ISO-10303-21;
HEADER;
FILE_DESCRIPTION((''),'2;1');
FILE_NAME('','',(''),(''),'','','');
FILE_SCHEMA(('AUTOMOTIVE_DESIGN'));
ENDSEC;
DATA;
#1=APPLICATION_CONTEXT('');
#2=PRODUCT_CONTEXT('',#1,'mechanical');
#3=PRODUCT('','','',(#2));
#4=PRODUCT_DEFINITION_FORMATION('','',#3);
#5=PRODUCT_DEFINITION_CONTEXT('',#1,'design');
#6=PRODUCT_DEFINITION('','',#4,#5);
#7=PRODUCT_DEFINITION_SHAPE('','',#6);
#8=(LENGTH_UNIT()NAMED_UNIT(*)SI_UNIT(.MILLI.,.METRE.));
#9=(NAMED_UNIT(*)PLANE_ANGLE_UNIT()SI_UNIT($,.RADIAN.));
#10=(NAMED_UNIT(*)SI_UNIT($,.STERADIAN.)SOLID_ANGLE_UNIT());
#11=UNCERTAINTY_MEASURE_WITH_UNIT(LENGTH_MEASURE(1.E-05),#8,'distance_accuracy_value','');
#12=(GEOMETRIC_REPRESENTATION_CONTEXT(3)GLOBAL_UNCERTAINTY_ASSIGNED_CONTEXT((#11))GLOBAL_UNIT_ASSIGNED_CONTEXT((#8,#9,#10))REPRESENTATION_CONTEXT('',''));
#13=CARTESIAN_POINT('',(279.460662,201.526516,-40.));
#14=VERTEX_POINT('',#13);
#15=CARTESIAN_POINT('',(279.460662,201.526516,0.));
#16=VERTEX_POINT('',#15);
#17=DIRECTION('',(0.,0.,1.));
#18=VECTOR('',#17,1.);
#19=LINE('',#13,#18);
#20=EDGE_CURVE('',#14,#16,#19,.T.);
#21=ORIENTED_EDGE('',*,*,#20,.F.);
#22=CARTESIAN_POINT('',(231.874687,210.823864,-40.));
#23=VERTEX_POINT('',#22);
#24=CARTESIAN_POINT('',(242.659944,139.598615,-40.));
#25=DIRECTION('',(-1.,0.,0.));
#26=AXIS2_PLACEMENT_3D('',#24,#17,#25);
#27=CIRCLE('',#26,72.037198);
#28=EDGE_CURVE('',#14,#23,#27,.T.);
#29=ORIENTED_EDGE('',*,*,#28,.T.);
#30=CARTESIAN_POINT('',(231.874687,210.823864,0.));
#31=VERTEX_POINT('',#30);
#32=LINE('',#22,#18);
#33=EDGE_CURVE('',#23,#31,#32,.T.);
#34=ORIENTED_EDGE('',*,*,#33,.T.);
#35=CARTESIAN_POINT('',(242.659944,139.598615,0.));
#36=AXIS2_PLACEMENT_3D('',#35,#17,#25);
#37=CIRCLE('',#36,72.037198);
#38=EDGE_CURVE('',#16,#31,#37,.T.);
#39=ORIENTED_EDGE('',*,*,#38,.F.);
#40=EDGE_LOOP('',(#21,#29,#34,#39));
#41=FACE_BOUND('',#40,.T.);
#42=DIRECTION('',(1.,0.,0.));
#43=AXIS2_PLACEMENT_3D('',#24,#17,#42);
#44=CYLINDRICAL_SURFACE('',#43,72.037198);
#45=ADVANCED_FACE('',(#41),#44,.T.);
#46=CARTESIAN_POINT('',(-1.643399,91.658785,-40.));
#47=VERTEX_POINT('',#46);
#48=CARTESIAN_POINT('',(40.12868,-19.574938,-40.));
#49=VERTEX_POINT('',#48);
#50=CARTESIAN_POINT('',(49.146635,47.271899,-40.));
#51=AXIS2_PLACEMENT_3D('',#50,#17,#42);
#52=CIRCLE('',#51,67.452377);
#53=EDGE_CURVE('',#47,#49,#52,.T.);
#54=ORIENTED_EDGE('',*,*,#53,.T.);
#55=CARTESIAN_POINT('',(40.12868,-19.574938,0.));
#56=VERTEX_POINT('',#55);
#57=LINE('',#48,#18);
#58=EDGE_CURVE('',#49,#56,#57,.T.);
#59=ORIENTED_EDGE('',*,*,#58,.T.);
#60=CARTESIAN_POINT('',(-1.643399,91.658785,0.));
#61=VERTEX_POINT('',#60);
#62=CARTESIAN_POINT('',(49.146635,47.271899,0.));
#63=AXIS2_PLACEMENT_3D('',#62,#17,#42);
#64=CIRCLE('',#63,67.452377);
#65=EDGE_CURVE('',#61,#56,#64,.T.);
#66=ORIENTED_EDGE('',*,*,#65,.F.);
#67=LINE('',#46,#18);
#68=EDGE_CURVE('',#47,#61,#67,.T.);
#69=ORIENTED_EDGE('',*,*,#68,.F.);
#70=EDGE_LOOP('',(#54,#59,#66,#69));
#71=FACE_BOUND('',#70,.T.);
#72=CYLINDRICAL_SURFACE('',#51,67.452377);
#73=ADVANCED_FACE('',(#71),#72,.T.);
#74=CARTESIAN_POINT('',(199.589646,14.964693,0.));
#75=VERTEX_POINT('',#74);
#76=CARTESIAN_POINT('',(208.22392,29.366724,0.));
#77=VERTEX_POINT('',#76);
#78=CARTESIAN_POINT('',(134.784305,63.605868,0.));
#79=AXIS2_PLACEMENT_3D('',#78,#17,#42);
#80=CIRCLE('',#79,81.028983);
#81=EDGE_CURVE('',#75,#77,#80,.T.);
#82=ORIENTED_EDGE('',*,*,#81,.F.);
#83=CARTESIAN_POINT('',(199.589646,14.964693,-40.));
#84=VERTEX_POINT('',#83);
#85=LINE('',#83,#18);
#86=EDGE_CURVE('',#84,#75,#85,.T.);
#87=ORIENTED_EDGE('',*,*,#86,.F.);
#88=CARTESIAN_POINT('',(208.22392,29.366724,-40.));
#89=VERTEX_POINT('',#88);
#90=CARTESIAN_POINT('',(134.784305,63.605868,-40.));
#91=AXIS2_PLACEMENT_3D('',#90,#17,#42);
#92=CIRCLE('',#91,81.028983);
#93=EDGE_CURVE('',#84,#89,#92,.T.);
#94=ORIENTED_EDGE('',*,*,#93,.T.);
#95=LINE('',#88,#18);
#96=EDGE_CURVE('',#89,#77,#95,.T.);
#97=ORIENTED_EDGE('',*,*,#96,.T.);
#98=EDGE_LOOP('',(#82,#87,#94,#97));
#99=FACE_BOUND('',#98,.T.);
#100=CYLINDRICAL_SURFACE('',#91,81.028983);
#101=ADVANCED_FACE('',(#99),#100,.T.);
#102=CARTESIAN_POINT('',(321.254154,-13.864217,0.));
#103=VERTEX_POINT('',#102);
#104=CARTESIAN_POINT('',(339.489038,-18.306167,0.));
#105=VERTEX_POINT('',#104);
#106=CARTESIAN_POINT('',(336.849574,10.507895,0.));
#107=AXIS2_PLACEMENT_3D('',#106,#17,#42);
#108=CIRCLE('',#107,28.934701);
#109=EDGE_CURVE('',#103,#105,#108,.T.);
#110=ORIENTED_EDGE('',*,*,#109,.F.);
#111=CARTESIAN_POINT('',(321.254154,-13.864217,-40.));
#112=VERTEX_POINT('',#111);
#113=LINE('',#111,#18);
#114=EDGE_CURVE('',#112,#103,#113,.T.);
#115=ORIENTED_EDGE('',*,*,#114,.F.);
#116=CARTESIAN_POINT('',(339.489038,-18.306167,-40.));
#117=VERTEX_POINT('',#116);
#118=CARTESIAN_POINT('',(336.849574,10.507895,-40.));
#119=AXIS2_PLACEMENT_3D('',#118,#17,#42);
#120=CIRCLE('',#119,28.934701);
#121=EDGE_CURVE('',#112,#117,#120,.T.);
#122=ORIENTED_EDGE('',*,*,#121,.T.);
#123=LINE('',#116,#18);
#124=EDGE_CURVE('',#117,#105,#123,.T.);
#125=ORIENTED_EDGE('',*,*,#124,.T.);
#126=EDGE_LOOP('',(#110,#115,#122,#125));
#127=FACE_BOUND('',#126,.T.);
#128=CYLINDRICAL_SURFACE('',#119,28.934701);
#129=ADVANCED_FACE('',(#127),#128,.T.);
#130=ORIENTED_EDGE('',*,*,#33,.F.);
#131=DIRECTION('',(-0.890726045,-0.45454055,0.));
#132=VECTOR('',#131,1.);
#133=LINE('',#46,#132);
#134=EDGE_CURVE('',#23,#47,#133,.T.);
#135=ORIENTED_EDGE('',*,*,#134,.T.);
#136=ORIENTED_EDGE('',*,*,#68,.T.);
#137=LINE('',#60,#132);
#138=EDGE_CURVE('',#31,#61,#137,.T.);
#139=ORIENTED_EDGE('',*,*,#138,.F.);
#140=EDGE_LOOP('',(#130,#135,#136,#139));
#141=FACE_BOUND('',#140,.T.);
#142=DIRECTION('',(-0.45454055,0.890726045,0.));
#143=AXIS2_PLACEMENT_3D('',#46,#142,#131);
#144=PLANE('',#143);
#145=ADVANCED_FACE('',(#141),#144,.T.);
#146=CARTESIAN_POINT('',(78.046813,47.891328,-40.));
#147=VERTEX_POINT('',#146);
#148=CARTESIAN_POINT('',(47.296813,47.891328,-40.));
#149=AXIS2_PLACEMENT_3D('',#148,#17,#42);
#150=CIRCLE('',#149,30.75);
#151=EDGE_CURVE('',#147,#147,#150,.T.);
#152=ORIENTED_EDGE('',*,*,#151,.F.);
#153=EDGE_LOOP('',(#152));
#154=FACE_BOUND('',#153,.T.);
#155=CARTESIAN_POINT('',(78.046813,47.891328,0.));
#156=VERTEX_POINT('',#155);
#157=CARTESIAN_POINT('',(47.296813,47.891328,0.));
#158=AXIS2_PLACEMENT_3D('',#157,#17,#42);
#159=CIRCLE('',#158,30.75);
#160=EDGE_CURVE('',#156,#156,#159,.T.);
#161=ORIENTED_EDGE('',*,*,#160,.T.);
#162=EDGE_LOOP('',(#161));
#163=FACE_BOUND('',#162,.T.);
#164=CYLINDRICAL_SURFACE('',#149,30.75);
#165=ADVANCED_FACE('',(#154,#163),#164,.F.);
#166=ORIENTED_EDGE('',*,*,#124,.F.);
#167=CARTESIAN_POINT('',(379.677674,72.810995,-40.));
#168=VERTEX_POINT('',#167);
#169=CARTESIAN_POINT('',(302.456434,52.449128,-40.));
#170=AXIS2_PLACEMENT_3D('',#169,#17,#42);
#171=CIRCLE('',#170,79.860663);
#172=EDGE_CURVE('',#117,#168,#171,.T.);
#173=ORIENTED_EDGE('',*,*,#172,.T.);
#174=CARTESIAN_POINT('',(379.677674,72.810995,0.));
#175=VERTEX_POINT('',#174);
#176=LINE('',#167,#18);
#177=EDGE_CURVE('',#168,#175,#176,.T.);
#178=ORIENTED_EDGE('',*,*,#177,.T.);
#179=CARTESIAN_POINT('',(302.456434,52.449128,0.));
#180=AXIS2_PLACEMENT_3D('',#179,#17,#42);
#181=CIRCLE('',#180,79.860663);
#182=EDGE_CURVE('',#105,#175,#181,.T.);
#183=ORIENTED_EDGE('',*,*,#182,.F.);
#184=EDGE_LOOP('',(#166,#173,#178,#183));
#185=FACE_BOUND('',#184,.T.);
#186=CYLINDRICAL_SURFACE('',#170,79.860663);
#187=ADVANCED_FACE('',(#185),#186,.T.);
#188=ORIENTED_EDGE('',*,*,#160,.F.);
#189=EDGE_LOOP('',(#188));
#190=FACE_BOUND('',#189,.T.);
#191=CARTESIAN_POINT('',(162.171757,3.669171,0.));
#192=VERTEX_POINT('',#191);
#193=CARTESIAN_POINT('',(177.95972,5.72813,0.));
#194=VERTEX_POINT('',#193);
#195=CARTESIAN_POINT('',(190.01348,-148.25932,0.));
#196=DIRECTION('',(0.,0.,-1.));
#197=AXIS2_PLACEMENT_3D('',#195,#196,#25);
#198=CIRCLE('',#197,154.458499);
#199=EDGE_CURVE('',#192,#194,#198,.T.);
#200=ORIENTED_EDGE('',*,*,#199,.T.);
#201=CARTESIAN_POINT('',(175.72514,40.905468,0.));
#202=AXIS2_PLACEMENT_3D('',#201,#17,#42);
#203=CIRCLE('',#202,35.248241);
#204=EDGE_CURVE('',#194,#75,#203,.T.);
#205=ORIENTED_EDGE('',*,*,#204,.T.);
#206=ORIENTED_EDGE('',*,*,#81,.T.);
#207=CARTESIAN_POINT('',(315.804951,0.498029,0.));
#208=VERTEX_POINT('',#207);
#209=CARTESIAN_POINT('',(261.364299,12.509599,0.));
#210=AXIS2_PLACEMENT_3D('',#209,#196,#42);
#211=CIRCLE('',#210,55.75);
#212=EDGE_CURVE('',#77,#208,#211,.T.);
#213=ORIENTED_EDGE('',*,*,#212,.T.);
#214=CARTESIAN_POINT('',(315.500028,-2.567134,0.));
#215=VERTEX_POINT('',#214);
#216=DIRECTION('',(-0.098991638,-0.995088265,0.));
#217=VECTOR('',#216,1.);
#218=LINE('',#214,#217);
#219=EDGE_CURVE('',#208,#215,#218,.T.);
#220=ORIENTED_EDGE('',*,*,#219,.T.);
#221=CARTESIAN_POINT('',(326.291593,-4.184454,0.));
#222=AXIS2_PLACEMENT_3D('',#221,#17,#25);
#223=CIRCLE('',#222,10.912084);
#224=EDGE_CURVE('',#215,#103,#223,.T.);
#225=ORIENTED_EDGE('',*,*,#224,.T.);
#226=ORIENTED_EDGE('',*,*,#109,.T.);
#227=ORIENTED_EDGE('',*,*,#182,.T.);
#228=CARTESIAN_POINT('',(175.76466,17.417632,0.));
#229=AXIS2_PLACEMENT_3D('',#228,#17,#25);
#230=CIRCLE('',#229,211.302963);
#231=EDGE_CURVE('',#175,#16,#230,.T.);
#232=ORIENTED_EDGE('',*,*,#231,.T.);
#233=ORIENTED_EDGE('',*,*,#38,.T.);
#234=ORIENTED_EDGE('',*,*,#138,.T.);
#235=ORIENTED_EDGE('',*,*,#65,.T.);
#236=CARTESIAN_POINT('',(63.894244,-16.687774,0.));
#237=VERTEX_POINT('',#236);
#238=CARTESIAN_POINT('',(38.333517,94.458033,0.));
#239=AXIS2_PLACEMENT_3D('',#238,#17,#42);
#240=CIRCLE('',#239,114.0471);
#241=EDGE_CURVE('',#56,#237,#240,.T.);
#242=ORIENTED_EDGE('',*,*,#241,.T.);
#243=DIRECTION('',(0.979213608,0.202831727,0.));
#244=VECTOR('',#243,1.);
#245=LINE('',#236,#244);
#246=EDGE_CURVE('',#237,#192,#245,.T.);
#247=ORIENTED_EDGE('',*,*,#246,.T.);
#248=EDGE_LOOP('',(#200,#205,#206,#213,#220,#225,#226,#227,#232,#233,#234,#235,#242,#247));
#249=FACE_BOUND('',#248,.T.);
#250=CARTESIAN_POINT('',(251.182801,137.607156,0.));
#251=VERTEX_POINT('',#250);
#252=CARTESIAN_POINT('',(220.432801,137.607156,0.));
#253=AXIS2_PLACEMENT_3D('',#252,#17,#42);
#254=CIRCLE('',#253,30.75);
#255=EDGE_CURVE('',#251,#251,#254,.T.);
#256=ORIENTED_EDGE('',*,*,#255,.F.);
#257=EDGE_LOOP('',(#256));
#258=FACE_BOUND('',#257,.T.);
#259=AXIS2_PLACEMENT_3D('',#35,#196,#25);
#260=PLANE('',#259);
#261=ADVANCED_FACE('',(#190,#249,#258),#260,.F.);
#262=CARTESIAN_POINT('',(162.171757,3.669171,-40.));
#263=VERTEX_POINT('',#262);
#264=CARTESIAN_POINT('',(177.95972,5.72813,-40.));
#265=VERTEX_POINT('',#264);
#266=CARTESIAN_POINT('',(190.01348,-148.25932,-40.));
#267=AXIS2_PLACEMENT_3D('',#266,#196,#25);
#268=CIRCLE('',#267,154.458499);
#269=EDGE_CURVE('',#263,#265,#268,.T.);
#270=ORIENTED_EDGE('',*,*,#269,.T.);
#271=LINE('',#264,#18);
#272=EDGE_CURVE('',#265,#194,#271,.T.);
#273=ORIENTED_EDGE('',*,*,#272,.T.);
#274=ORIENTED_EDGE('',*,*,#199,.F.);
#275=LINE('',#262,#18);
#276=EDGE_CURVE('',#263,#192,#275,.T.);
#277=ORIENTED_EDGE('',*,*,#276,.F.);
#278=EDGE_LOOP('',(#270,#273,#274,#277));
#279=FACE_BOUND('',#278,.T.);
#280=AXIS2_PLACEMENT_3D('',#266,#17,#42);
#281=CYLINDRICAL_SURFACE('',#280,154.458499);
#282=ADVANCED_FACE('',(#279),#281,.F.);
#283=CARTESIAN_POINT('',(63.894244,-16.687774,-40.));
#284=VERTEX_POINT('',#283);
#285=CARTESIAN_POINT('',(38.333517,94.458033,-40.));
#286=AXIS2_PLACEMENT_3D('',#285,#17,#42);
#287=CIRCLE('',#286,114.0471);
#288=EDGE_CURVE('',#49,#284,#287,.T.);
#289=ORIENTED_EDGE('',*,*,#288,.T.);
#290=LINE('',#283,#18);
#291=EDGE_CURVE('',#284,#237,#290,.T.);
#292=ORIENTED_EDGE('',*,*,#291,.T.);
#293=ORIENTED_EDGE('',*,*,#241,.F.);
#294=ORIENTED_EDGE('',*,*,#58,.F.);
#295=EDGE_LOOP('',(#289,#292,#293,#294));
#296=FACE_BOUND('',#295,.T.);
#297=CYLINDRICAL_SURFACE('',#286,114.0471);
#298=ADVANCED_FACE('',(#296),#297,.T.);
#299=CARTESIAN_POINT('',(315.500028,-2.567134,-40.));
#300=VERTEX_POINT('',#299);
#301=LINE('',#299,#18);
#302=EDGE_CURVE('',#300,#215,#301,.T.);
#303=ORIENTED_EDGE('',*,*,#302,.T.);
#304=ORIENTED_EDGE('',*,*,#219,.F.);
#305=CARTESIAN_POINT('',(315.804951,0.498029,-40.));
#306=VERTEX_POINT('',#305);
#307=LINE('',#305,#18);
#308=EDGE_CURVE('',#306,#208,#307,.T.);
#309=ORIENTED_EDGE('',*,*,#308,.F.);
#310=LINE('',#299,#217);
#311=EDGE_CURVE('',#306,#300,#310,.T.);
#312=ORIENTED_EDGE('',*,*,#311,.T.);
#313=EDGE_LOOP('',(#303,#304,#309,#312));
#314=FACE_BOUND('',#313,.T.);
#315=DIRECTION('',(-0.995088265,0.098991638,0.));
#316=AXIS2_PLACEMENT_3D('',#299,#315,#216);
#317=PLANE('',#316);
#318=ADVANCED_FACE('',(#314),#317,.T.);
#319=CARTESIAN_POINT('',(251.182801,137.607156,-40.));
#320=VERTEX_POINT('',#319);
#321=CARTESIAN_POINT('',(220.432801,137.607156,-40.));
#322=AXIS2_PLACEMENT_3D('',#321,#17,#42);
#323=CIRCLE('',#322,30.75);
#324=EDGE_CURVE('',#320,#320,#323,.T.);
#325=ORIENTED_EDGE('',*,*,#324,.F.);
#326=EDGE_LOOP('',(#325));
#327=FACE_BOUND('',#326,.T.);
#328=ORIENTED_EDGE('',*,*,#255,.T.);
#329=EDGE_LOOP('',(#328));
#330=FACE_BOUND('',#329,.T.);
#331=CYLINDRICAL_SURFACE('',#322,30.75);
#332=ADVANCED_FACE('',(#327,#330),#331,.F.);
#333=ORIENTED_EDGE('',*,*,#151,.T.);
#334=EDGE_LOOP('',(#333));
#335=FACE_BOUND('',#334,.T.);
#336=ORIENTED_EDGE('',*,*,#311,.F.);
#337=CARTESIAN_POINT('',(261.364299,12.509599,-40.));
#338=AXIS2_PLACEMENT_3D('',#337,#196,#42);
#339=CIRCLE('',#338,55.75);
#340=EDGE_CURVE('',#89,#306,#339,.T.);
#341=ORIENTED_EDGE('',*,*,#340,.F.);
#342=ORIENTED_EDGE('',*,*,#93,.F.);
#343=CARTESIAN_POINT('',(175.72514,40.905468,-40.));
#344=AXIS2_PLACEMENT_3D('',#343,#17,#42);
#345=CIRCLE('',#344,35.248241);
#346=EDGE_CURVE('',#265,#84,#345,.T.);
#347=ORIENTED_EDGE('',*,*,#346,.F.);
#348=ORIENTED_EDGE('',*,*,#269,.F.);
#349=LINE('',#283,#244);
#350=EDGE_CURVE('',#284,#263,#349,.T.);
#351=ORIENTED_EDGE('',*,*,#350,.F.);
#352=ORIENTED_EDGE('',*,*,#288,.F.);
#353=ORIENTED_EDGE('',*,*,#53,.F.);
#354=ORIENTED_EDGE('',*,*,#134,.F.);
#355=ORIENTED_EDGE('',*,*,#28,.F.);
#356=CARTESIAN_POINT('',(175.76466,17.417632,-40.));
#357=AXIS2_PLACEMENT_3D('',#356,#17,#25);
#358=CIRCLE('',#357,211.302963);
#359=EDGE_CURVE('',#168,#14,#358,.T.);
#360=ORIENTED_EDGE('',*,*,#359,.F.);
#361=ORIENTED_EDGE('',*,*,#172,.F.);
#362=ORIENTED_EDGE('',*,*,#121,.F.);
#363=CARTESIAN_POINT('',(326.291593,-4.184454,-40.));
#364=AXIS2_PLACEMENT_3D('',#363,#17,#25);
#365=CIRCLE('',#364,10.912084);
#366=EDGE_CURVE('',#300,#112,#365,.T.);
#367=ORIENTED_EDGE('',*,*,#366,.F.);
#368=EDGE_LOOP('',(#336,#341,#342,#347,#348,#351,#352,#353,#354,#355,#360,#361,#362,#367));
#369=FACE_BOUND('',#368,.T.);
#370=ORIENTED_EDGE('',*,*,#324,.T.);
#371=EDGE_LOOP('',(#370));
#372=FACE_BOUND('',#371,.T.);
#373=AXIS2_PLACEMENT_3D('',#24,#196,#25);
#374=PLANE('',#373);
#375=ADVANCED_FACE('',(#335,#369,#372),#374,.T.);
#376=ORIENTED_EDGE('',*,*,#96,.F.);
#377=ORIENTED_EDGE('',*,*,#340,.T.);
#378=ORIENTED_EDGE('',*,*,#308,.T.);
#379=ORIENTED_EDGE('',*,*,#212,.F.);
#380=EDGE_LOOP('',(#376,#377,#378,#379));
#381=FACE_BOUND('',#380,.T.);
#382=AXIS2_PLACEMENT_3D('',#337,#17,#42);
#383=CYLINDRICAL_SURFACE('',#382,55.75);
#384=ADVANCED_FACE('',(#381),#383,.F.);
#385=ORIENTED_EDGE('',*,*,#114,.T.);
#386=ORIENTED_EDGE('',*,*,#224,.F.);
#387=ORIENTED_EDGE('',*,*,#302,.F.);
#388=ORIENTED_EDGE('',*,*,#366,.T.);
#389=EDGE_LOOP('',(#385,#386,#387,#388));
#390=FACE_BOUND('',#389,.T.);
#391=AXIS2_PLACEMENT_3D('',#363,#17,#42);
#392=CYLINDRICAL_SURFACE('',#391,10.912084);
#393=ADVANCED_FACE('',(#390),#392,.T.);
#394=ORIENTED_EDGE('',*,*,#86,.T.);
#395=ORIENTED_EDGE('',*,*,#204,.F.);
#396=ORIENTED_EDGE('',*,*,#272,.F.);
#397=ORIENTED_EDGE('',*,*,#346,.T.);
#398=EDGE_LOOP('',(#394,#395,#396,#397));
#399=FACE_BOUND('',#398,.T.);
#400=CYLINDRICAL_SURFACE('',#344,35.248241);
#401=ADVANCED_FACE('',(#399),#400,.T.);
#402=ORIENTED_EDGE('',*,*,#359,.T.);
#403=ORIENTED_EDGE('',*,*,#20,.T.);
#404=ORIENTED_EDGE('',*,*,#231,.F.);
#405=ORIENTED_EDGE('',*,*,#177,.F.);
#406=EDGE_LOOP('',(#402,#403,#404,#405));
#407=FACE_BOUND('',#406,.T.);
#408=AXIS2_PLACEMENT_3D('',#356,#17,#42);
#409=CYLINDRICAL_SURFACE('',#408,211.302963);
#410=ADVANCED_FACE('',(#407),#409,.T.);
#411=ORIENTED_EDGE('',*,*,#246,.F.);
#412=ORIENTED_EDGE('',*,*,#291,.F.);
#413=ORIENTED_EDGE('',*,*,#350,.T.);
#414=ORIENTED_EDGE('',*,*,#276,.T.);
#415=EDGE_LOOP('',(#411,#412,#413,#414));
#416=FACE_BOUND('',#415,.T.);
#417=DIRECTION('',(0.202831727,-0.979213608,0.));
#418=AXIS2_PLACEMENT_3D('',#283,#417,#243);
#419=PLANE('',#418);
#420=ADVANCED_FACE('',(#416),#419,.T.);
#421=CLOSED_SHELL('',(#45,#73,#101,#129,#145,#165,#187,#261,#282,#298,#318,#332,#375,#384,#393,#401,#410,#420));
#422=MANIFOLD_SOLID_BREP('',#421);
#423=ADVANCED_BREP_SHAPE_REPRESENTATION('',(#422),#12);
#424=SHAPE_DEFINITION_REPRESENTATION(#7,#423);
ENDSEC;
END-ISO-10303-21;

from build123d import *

# Parameters (mm, degrees)
IZIM1_R            = 30.75
TABAN_FLAN_1_DEPTH = 40


# Sheet-metal steps are written as plain solids
with BuildPart() as part:
    # Çizim1 → Taban-Flanş1 (new body)
    with BuildSketch(Plane.XY):
        with BuildLine():
            Line((-1.643398768, 91.658785331), (231.87468677, 210.823863864))
            ThreePointArc((231.87468677, 210.823863864), (256.473387586, 210.2990154), (279.460662471, 201.526516265))
            ThreePointArc((279.460662471, 201.526516265), (342.491227066, 147.22978074), (379.677674371, 72.810994814))
            ThreePointArc((379.677674371, 72.810994814), (375.525370831, 20.220941214), (339.489037745, -18.306166907))
            ThreePointArc((339.489037745, -18.306166907), (330.00144074, -17.604735784), (321.25415431, -13.864216747))
            ThreePointArc((321.25415431, -13.864216747), (316.568149269, -9.137053114), (315.500028304, -2.567134022))
            Line((315.500028304, -2.567134022), (315.804951466, 0.498028518))
            ThreePointArc((315.804951466, 0.498028518), (275.813280207, 66.354649224), (208.223919967, 29.366723581))
            ThreePointArc((208.223919967, 29.366723581), (204.280862876, 21.941440766), (199.589645635, 14.964693321))
            ThreePointArc((199.589645635, 14.964693321), (189.567794587, 8.489124316), (177.959719616, 5.728130318))
            ThreePointArc((177.959719616, 5.728130318), (170.039190968, 4.902214912), (162.171757217, 3.669171324))
            Line((162.171757217, 3.669171324), (63.894243865, -16.687773846))
            ThreePointArc((63.894243865, -16.687773846), (52.087429233, -18.756679073), (40.128679606, -19.57493818))
            ThreePointArc((40.128679606, -19.57493818), (-13.999894405, 23.558211566), (-1.643398768, 91.658785331))
        make_face()
        with Locations((47.296813478, 47.891327559)):
            Circle(IZIM1_R, mode=Mode.SUBTRACT)
        with Locations((220.432800905, 137.607155914)):
            Circle(IZIM1_R, mode=Mode.SUBTRACT)
    extrude(amount=-TABAN_FLAN_1_DEPTH)


solid = part.part
